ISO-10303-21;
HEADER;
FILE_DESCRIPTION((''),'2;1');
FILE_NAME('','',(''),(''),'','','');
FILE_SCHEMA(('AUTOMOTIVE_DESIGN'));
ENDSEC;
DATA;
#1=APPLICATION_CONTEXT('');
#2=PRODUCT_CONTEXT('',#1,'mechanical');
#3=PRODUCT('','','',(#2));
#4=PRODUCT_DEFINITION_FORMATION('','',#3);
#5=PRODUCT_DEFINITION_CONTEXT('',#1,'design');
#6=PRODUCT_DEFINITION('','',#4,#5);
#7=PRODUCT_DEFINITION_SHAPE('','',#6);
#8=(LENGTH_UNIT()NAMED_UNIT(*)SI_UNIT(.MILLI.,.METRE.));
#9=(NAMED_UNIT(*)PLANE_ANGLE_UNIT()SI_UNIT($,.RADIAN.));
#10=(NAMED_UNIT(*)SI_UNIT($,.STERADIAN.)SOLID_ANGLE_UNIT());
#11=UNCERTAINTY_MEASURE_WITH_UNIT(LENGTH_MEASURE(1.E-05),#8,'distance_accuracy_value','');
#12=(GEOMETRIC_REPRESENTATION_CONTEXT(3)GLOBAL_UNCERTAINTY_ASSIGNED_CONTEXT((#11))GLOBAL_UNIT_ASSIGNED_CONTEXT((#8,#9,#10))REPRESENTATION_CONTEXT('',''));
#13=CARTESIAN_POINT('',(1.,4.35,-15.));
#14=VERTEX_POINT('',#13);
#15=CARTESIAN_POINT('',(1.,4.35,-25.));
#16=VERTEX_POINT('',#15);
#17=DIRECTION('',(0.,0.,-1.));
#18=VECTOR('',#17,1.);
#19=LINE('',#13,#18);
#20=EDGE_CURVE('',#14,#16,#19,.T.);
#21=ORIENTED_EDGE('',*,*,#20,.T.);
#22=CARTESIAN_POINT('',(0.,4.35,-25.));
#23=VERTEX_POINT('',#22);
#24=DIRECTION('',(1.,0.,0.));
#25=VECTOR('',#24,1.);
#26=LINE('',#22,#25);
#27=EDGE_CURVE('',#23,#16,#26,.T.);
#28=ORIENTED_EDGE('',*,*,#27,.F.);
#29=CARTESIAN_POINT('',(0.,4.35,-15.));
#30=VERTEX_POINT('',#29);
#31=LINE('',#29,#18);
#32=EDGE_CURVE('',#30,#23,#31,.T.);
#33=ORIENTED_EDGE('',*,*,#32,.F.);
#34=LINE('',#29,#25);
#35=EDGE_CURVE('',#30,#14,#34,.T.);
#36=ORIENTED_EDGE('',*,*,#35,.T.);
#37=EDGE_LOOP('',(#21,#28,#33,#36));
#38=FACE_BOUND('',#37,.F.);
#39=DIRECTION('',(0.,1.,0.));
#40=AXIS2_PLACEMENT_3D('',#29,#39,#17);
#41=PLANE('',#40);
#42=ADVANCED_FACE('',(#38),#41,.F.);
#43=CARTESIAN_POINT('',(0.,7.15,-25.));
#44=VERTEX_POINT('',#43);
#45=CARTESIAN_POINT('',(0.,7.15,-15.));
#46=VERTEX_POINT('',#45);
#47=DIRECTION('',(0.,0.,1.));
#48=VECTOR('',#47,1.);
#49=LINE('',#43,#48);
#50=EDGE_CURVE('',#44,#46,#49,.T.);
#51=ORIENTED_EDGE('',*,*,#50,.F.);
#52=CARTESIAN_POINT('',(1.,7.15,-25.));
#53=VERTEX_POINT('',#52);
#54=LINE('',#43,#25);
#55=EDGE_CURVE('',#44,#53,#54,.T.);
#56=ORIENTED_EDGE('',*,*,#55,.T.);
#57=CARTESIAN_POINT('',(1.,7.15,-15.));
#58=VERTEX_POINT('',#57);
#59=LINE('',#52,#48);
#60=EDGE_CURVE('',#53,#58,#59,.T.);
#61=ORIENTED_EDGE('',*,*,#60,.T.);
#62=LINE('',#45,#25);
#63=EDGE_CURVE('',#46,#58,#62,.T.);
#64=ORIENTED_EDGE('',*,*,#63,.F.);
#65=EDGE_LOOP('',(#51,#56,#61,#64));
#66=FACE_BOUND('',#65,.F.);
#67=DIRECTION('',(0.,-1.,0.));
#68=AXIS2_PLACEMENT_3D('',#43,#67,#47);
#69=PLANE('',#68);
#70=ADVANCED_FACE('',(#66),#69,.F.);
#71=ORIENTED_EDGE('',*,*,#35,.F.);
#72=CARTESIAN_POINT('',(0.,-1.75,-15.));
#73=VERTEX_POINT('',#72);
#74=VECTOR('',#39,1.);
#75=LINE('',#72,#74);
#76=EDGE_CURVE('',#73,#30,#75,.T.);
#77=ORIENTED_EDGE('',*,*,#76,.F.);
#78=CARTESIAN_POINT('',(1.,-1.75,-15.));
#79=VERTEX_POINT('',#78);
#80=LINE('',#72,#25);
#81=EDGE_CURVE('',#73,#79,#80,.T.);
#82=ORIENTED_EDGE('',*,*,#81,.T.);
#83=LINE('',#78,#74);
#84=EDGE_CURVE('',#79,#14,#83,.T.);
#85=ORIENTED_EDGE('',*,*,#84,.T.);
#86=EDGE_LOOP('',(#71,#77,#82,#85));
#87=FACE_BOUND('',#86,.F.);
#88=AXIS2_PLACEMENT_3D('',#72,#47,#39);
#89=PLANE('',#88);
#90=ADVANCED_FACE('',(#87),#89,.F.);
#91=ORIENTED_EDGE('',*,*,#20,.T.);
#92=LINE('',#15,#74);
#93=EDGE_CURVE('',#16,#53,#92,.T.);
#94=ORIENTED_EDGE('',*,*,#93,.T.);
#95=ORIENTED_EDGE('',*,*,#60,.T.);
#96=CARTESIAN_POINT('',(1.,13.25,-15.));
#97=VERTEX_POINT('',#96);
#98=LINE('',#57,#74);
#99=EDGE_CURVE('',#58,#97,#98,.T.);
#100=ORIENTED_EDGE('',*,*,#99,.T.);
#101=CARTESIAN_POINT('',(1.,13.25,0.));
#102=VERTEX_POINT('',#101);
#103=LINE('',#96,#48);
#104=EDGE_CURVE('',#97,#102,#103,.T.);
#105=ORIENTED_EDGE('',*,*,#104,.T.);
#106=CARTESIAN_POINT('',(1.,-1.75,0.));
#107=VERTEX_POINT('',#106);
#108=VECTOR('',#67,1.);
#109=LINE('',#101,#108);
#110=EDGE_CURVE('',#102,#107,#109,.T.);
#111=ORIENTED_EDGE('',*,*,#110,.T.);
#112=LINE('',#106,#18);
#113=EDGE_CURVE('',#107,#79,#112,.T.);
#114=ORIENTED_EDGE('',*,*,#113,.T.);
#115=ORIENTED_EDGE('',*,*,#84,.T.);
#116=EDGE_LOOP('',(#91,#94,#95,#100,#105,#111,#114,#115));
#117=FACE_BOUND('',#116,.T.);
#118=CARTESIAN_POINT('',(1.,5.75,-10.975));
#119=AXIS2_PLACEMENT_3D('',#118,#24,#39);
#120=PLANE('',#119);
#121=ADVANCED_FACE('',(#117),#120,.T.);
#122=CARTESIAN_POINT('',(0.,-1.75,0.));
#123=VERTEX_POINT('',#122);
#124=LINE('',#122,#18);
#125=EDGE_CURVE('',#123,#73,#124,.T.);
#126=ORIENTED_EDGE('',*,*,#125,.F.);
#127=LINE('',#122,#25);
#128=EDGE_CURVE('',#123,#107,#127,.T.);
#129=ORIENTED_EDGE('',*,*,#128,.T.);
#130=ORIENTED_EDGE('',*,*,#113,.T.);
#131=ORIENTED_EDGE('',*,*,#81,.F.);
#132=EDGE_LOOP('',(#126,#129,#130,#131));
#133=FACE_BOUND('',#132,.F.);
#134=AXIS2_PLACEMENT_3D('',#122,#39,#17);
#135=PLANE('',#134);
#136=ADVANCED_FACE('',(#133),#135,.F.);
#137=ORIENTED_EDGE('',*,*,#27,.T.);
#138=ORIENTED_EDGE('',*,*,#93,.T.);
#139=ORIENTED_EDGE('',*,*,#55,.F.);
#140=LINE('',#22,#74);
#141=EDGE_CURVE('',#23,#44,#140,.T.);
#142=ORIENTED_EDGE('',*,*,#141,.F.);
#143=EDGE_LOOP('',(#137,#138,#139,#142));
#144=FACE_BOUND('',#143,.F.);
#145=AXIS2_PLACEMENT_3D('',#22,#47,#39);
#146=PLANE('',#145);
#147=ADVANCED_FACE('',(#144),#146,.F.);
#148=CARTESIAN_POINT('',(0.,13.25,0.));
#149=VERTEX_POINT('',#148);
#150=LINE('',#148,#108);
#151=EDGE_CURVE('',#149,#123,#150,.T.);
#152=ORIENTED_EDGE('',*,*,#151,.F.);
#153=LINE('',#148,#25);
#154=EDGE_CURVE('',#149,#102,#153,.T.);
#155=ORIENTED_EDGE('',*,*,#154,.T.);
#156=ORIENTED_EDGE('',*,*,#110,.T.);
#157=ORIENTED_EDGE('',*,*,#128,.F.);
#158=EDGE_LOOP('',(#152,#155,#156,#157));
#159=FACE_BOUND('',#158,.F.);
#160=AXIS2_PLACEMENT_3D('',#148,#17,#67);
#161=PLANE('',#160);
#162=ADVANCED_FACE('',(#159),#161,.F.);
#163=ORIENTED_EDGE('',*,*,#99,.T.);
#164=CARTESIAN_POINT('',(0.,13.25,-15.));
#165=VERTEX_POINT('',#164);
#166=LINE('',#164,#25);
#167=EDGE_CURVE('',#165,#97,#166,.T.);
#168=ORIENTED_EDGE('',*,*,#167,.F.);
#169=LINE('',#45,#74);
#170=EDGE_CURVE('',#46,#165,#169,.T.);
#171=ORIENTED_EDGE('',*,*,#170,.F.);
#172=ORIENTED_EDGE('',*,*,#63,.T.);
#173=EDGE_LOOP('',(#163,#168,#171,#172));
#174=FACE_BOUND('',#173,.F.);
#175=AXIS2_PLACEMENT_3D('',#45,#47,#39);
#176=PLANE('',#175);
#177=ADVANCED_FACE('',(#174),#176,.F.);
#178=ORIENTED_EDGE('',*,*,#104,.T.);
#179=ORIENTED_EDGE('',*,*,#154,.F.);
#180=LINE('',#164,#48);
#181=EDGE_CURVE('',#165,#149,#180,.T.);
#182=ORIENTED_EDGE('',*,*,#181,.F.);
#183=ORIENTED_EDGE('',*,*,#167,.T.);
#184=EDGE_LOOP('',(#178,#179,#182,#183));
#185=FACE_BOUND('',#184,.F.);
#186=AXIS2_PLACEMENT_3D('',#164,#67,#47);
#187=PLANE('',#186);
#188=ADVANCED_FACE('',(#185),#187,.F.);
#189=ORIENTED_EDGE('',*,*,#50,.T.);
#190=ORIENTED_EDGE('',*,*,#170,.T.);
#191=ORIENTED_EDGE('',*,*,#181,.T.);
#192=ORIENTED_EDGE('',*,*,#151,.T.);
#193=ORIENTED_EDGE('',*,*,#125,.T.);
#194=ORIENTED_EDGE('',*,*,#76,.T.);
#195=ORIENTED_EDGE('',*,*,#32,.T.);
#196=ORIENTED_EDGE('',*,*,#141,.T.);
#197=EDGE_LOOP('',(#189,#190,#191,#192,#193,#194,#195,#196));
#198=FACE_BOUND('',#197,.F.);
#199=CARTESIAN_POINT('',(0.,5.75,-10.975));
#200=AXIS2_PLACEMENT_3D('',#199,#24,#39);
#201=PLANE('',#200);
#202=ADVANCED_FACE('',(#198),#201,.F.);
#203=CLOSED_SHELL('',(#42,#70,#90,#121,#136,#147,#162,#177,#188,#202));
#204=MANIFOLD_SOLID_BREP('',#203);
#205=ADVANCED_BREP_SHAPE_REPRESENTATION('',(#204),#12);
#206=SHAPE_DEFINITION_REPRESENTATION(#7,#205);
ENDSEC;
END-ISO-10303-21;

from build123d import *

# Parameters (mm, degrees)
F1_DEPTH = 1


# Not quite as in the source:
# - a feature names something its author has since deleted; it is built from what else it names


with BuildPart() as f1:
    # F0 (on Right) → F1 (new body)
    with BuildSketch(Plane.YZ):
        Polygon((11.5, 0), (0, 0), (-1.75, 0), (-1.75, -15), (0, -15), (4.35, -15), (4.35, -25), (5.25, -25), (6.25, -25), (7.15, -25), (7.15, -15), (11.5, -15), (13.25, -15), (13.25, 0), align=None)
    extrude(amount=F1_DEPTH)


solid = f1.part
